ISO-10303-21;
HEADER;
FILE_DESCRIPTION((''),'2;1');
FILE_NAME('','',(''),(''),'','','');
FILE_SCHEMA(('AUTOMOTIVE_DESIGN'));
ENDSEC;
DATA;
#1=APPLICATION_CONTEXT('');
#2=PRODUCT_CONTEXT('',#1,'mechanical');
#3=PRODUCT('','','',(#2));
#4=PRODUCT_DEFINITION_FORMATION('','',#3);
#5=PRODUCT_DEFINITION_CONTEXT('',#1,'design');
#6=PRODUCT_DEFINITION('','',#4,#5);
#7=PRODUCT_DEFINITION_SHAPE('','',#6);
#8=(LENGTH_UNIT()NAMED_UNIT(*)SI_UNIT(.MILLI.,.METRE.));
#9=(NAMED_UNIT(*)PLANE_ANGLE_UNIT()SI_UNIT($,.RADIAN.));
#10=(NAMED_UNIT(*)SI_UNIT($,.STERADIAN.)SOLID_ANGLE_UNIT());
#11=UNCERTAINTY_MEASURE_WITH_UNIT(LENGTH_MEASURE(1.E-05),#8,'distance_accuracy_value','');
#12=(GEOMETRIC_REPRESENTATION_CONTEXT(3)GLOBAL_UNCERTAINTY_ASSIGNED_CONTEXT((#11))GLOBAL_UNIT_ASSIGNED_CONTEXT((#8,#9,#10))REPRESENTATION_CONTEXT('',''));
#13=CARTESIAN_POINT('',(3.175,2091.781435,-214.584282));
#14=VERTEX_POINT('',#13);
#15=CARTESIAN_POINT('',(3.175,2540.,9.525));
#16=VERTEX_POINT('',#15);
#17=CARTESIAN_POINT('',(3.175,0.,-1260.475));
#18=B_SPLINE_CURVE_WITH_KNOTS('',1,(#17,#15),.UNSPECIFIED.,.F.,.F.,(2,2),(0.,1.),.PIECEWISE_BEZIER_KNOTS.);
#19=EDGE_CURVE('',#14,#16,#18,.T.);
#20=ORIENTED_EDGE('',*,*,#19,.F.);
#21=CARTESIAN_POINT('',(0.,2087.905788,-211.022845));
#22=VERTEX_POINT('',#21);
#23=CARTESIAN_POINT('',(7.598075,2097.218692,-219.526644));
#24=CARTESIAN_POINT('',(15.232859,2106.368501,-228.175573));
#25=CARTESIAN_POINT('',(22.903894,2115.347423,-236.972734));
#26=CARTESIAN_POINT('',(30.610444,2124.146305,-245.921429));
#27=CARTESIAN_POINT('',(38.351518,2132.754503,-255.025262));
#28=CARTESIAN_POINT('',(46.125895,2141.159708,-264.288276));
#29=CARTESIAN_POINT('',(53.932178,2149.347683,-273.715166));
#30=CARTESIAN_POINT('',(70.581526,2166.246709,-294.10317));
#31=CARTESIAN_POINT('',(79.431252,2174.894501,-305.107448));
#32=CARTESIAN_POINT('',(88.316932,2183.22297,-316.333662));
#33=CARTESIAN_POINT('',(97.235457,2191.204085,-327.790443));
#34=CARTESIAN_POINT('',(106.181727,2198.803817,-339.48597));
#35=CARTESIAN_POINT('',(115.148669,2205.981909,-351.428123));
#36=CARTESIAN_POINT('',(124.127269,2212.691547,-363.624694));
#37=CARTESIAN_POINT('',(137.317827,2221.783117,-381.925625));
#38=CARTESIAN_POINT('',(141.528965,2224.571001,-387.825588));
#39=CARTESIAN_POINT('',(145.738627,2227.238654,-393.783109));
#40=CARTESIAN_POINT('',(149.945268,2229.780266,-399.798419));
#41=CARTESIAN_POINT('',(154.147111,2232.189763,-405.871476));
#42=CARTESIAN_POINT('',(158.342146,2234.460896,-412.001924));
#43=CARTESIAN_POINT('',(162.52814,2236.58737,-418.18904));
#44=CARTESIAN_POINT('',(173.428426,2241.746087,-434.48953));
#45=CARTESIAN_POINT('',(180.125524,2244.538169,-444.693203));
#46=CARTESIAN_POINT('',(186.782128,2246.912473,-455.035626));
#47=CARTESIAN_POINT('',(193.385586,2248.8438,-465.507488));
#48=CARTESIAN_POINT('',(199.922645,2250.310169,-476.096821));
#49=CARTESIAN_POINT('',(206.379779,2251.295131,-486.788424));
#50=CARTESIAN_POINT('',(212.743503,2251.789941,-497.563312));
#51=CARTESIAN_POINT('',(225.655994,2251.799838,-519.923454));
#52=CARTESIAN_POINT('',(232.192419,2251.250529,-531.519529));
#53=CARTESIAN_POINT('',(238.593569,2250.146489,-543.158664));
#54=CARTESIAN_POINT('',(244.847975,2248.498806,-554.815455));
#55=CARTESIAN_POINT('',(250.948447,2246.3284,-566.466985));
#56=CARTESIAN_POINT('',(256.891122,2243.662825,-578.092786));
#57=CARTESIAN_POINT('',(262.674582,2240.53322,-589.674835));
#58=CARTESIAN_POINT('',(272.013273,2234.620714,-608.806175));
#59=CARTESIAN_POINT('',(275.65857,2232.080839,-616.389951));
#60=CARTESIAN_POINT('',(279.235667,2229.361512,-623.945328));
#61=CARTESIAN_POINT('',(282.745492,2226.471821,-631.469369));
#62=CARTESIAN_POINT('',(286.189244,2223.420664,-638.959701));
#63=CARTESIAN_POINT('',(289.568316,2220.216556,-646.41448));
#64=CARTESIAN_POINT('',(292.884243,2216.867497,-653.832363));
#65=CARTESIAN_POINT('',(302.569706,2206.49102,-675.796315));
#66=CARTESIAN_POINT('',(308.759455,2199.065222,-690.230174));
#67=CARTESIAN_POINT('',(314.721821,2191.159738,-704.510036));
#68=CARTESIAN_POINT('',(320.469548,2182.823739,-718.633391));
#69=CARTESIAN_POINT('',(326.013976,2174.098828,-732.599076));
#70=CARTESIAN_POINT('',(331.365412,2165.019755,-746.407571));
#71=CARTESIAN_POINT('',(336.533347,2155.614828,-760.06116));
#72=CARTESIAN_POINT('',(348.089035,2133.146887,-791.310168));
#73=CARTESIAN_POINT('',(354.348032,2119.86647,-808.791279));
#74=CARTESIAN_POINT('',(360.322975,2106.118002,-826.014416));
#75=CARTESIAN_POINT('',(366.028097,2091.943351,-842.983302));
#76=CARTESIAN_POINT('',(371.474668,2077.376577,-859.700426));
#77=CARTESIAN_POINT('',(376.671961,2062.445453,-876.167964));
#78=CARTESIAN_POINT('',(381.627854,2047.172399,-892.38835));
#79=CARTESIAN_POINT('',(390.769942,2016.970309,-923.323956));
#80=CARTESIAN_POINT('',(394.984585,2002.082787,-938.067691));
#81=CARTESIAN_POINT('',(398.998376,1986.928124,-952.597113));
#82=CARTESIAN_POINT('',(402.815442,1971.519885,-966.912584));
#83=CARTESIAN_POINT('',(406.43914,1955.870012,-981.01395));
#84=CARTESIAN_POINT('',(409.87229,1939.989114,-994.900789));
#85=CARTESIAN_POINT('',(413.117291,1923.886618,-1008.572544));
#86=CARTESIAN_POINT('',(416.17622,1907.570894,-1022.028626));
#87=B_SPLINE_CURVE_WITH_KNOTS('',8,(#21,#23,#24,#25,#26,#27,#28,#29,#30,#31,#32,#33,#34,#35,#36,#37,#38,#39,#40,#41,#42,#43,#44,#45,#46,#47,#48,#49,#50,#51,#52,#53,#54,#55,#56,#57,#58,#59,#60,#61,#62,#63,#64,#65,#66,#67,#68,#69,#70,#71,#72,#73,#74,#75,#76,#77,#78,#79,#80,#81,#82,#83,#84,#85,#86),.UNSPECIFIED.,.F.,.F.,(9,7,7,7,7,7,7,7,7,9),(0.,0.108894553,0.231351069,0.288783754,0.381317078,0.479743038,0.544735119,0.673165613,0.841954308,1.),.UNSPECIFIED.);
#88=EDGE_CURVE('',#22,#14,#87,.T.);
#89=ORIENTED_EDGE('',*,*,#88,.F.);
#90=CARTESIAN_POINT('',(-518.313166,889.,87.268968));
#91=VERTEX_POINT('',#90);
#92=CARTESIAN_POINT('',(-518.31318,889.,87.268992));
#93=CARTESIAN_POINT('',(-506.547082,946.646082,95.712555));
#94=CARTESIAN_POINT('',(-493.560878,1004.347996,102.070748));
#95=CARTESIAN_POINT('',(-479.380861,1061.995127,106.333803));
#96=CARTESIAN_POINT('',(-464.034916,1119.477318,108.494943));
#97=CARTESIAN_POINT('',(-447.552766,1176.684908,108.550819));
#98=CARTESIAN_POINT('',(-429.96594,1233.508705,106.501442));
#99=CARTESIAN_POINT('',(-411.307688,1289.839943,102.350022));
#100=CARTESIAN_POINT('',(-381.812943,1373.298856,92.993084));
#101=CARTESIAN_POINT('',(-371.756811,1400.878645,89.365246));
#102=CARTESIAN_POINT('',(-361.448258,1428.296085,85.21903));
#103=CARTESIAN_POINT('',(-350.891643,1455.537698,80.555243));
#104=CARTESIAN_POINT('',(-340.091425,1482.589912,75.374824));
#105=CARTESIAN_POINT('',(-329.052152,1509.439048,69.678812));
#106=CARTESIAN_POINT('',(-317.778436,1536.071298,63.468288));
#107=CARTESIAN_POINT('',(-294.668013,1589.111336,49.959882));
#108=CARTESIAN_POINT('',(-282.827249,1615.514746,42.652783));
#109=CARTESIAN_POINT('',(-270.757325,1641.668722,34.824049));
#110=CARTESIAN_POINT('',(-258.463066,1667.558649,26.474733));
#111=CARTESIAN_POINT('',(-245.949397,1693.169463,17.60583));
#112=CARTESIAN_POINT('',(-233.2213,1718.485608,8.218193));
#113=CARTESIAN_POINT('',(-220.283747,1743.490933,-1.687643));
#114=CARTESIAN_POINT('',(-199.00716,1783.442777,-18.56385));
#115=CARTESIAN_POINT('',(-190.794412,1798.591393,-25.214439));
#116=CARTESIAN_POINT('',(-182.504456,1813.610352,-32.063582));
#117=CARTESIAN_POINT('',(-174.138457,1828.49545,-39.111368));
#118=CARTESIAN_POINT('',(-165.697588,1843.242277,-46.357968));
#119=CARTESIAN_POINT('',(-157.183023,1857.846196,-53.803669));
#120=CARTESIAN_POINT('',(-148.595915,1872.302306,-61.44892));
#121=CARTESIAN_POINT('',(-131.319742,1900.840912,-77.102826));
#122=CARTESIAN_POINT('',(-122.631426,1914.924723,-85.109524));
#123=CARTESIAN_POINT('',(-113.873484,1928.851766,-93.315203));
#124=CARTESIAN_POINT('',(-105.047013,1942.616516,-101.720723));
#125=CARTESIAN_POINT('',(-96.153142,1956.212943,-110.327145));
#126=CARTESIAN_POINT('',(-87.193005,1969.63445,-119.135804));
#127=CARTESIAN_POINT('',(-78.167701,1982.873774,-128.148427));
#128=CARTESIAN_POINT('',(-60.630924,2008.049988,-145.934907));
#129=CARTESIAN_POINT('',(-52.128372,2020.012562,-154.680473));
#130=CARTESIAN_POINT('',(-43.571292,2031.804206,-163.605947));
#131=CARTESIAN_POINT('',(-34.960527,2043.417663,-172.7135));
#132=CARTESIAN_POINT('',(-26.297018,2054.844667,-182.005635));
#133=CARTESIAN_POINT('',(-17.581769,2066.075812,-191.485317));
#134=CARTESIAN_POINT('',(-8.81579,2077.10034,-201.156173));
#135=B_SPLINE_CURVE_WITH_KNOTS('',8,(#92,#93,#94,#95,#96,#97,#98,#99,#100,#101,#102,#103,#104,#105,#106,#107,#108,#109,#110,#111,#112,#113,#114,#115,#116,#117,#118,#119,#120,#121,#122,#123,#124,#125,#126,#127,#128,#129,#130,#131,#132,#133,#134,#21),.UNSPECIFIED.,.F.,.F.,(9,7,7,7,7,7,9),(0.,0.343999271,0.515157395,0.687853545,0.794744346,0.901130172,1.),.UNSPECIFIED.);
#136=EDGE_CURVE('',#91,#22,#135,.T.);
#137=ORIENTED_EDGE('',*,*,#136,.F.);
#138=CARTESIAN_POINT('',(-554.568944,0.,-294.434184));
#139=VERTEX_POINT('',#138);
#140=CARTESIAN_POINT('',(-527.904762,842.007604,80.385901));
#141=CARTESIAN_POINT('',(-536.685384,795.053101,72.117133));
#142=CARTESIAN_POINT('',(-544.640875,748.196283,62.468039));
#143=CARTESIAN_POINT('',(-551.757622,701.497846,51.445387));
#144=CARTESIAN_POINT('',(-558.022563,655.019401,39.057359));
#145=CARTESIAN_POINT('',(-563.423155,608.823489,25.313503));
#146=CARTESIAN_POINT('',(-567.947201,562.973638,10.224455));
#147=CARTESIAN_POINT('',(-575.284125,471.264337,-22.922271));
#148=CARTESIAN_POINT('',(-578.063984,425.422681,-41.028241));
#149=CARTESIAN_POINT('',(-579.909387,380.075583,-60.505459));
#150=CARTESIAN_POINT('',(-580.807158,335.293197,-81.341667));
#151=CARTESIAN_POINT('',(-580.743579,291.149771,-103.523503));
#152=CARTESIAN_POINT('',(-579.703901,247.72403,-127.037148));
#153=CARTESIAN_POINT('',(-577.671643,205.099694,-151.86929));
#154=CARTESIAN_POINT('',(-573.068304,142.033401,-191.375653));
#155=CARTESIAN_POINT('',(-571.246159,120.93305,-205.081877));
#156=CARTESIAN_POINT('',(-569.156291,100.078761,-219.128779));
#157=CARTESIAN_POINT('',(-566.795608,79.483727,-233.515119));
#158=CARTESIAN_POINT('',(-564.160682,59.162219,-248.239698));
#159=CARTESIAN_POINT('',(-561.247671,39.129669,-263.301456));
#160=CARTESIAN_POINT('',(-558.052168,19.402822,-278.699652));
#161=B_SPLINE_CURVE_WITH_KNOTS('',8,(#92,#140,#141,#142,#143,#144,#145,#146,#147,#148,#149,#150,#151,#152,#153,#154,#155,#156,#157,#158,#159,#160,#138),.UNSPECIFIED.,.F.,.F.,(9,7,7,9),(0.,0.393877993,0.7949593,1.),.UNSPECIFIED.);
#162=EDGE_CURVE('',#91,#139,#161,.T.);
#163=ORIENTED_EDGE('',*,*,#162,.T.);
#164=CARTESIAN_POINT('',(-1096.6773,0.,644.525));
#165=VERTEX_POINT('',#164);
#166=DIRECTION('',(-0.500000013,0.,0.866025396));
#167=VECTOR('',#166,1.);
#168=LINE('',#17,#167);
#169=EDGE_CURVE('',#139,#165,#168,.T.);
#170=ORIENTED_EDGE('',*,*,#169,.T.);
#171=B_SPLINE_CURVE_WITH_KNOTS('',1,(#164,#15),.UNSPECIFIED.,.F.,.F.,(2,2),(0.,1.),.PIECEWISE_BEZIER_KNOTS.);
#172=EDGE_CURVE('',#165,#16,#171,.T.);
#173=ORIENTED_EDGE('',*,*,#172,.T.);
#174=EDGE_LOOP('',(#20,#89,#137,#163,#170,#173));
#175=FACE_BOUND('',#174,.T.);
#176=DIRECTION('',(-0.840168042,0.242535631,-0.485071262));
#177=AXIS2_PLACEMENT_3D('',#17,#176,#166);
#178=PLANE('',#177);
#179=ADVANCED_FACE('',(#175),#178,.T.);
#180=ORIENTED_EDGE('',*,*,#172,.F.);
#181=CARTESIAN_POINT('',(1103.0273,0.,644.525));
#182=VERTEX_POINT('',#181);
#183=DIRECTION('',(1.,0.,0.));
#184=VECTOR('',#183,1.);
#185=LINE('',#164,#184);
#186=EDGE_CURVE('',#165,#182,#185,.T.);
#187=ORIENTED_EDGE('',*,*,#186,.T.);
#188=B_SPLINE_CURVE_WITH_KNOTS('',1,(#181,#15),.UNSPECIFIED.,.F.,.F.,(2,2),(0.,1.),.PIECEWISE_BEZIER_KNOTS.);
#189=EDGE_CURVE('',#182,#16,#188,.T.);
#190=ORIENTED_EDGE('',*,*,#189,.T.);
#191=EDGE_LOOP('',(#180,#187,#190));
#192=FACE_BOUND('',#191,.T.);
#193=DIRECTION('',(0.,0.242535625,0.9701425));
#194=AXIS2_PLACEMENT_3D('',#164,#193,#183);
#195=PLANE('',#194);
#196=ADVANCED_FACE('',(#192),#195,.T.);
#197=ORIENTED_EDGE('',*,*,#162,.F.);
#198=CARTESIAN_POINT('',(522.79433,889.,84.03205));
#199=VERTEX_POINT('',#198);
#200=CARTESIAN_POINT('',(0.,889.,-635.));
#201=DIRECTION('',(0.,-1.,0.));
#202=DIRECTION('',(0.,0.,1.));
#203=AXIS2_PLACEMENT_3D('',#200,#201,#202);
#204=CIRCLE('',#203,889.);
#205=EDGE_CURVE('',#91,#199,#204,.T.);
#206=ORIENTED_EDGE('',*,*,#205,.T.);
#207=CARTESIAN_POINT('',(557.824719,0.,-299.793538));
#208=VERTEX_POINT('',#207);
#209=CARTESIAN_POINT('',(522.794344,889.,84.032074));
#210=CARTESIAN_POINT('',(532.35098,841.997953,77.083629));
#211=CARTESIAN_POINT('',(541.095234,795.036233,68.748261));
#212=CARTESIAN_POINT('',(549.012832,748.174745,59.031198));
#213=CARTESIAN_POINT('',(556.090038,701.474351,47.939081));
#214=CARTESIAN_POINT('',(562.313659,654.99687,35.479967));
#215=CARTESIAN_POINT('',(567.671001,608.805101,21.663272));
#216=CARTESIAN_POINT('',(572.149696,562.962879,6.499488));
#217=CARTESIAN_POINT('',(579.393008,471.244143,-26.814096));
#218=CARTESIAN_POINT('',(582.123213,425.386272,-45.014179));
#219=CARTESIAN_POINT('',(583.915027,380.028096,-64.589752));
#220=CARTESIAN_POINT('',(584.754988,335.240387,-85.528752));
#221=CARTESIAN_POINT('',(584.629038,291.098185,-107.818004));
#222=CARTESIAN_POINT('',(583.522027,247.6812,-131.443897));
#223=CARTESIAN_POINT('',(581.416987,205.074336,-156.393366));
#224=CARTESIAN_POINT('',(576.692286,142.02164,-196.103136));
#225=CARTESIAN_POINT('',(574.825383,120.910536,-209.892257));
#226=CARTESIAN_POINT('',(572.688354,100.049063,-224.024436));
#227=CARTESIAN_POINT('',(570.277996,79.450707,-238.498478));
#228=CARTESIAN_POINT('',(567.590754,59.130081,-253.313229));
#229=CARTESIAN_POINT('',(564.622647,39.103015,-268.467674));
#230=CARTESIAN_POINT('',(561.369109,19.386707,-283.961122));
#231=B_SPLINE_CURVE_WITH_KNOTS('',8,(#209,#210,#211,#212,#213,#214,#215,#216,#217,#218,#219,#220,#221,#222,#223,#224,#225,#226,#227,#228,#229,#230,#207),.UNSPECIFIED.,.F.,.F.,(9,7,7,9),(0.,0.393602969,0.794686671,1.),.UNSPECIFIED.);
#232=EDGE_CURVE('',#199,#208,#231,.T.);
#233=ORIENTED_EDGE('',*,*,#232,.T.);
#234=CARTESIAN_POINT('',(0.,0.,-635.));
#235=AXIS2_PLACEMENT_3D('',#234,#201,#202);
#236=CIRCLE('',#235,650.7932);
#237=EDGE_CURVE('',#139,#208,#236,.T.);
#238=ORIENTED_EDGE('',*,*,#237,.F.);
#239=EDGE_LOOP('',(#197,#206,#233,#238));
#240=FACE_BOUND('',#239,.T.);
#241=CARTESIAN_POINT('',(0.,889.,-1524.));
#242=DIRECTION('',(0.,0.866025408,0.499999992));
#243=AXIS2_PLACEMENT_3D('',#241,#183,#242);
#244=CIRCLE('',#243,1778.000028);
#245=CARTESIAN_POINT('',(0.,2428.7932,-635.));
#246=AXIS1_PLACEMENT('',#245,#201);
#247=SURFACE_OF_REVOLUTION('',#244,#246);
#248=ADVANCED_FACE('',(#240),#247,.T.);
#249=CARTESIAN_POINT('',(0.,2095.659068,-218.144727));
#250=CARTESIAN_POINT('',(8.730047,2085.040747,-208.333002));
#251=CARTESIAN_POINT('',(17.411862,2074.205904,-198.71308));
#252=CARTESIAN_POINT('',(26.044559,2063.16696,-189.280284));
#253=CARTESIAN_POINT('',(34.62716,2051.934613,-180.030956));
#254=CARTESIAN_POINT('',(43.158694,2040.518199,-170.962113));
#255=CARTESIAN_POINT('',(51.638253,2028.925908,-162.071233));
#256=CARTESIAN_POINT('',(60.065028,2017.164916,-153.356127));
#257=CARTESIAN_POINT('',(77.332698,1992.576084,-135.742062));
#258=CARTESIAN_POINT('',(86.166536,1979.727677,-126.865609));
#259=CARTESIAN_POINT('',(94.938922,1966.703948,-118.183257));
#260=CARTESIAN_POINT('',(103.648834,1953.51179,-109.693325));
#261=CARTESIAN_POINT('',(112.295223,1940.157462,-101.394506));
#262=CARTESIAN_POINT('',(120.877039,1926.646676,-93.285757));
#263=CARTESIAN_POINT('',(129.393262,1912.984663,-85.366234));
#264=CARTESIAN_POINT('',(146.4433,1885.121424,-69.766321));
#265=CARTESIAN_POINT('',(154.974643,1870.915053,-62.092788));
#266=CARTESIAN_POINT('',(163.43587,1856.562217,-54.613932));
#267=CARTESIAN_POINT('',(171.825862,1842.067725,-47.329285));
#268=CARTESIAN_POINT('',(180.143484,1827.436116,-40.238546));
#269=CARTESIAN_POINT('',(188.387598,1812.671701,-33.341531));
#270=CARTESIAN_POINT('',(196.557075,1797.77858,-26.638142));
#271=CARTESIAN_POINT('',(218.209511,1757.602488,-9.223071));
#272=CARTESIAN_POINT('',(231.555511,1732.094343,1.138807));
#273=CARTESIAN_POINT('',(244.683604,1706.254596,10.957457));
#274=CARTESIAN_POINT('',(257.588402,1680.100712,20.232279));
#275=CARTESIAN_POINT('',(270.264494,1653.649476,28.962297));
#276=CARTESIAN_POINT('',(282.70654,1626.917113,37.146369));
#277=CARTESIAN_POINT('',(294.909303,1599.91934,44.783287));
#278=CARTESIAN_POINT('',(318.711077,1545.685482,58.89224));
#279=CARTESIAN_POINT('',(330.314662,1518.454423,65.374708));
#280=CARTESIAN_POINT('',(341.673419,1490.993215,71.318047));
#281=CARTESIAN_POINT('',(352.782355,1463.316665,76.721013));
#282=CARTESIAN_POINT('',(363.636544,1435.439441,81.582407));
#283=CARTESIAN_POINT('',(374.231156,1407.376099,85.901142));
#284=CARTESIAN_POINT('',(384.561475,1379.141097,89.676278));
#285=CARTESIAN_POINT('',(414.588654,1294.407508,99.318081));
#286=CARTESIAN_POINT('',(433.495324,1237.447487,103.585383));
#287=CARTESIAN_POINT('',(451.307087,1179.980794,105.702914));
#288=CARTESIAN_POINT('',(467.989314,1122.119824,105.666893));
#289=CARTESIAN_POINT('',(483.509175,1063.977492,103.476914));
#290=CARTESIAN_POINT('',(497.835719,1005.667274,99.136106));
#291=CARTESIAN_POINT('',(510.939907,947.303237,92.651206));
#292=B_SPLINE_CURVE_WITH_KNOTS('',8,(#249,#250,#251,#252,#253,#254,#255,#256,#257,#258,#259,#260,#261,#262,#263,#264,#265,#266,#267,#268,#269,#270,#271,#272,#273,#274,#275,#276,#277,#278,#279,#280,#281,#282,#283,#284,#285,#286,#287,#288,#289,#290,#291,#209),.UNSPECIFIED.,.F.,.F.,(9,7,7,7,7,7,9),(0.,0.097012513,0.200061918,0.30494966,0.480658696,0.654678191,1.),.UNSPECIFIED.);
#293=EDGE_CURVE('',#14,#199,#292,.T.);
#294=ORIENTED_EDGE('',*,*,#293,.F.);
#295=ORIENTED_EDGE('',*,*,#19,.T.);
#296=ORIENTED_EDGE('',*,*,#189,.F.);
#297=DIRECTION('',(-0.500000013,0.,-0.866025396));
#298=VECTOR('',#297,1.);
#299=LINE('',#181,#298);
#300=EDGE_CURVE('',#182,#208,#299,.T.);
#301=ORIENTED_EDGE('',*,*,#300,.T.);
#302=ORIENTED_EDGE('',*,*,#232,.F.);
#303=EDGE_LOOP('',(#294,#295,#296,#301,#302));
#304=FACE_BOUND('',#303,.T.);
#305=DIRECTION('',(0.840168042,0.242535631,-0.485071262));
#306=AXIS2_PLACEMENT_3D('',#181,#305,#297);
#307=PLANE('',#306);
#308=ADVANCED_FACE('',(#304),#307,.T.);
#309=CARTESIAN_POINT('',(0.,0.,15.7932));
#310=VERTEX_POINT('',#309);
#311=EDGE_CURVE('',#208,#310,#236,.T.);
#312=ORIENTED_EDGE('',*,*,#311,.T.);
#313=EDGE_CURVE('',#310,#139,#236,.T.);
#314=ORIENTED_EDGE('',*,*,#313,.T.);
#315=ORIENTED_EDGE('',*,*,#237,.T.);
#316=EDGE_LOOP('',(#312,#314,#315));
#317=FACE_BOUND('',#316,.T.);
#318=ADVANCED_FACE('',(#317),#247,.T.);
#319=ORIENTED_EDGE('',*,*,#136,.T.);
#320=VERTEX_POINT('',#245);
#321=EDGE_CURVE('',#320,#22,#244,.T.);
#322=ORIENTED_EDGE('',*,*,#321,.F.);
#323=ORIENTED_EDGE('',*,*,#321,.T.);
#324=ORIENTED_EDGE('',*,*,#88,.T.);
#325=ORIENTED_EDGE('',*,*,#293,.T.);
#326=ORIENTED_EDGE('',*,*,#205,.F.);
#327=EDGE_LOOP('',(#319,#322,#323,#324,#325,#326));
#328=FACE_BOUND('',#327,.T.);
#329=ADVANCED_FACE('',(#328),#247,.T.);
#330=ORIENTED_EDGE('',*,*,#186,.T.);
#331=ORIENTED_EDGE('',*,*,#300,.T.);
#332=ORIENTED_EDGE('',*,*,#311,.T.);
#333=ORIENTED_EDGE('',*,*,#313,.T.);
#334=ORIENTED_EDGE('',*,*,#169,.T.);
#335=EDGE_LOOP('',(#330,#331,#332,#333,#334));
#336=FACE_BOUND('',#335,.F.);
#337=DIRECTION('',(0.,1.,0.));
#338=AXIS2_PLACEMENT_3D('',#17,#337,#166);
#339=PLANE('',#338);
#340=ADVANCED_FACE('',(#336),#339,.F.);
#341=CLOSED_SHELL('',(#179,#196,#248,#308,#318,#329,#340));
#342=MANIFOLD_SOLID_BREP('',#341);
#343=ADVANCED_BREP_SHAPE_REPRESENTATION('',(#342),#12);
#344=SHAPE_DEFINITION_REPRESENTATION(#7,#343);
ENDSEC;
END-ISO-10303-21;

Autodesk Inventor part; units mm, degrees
ref_plane "YZ Plane" through (0, 0, 0) normal (1, 0, 0) x (0, 1, 0)
ref_plane "XY Plane" through (0, 0, 0) normal (0, 0, 1) x (1, 0, 0)
sketch "Sketch1" plane through (0, 0, 0) normal (0, 1, 0) x (-1, 0, 0)
  circle A0 centre (-3.175, 9.525) radius 1270
  line L0 (1096.6773, 644.525) -> (-1103.0273, 644.525)
  line L1 (-1103.0273, 644.525) -> (-3.175, -1260.475)
  line L2 (-3.175, -1260.475) -> (1096.6773, 644.525)
  point P0 (0, 0)
ref_plane "Work Plane1" through (0, 2540, 0) normal (0, 1, 0) x (-1, 0, 0)
sketch "Sketch2" plane through (0, 2540, 0) normal (0, 1, 0) x (-1, 0, 0)
  point P0 (0, 0)
  point P1 (-3.175, 9.525)
loft "Loft1" add profiles "Sketch1" section 2 point at (3.175, 2540, 9.525) contours L2 L1 L0
sketch "Sketch3" plane through (0, 0, 0) normal (1, 0, 0) x (0, 1, 0)
  line L0 (889, -635) -> (889, -1888.649)
  line L1 (0, 644.525) -> (0, -1260.475) projected
  line L2 (889, -635) -> (1928.8125, -635)
  line L3 (1928.8125, -635) -> (-149.225, -635)
  line L4 (889, -635) -> (889, 254)
  arc A0 (2428.7932, -635) -> (-650.7932, -635) centre (889, -1524) ccw
  line L5 (2428.7932, -635) -> (-650.7932, -635)
  point P0 (0, 0)
  point P1 (-650.7932, -635)
  point P2 (-149.225, -635)
revolve "Revolution1" add sketch "Sketch3" angle 360 about axis through (0, 2428.7932, -635) along (0, -1, 0)
sketch "Sketch4" plane through (1103.0273, 0, 644.525) normal (0.8401681, 0.2425356, -0.4850713) x (-0.3796283, -0.3757346, -0.8454028)
  point P0 (963.6236, 571.3208)
ref_plane "РабПлоскость3" through (0, 889, -635) normal (0, -1, 0) x (1, 0, 0)
split_face "Разделение1"
properties part number "Деталька даши"
